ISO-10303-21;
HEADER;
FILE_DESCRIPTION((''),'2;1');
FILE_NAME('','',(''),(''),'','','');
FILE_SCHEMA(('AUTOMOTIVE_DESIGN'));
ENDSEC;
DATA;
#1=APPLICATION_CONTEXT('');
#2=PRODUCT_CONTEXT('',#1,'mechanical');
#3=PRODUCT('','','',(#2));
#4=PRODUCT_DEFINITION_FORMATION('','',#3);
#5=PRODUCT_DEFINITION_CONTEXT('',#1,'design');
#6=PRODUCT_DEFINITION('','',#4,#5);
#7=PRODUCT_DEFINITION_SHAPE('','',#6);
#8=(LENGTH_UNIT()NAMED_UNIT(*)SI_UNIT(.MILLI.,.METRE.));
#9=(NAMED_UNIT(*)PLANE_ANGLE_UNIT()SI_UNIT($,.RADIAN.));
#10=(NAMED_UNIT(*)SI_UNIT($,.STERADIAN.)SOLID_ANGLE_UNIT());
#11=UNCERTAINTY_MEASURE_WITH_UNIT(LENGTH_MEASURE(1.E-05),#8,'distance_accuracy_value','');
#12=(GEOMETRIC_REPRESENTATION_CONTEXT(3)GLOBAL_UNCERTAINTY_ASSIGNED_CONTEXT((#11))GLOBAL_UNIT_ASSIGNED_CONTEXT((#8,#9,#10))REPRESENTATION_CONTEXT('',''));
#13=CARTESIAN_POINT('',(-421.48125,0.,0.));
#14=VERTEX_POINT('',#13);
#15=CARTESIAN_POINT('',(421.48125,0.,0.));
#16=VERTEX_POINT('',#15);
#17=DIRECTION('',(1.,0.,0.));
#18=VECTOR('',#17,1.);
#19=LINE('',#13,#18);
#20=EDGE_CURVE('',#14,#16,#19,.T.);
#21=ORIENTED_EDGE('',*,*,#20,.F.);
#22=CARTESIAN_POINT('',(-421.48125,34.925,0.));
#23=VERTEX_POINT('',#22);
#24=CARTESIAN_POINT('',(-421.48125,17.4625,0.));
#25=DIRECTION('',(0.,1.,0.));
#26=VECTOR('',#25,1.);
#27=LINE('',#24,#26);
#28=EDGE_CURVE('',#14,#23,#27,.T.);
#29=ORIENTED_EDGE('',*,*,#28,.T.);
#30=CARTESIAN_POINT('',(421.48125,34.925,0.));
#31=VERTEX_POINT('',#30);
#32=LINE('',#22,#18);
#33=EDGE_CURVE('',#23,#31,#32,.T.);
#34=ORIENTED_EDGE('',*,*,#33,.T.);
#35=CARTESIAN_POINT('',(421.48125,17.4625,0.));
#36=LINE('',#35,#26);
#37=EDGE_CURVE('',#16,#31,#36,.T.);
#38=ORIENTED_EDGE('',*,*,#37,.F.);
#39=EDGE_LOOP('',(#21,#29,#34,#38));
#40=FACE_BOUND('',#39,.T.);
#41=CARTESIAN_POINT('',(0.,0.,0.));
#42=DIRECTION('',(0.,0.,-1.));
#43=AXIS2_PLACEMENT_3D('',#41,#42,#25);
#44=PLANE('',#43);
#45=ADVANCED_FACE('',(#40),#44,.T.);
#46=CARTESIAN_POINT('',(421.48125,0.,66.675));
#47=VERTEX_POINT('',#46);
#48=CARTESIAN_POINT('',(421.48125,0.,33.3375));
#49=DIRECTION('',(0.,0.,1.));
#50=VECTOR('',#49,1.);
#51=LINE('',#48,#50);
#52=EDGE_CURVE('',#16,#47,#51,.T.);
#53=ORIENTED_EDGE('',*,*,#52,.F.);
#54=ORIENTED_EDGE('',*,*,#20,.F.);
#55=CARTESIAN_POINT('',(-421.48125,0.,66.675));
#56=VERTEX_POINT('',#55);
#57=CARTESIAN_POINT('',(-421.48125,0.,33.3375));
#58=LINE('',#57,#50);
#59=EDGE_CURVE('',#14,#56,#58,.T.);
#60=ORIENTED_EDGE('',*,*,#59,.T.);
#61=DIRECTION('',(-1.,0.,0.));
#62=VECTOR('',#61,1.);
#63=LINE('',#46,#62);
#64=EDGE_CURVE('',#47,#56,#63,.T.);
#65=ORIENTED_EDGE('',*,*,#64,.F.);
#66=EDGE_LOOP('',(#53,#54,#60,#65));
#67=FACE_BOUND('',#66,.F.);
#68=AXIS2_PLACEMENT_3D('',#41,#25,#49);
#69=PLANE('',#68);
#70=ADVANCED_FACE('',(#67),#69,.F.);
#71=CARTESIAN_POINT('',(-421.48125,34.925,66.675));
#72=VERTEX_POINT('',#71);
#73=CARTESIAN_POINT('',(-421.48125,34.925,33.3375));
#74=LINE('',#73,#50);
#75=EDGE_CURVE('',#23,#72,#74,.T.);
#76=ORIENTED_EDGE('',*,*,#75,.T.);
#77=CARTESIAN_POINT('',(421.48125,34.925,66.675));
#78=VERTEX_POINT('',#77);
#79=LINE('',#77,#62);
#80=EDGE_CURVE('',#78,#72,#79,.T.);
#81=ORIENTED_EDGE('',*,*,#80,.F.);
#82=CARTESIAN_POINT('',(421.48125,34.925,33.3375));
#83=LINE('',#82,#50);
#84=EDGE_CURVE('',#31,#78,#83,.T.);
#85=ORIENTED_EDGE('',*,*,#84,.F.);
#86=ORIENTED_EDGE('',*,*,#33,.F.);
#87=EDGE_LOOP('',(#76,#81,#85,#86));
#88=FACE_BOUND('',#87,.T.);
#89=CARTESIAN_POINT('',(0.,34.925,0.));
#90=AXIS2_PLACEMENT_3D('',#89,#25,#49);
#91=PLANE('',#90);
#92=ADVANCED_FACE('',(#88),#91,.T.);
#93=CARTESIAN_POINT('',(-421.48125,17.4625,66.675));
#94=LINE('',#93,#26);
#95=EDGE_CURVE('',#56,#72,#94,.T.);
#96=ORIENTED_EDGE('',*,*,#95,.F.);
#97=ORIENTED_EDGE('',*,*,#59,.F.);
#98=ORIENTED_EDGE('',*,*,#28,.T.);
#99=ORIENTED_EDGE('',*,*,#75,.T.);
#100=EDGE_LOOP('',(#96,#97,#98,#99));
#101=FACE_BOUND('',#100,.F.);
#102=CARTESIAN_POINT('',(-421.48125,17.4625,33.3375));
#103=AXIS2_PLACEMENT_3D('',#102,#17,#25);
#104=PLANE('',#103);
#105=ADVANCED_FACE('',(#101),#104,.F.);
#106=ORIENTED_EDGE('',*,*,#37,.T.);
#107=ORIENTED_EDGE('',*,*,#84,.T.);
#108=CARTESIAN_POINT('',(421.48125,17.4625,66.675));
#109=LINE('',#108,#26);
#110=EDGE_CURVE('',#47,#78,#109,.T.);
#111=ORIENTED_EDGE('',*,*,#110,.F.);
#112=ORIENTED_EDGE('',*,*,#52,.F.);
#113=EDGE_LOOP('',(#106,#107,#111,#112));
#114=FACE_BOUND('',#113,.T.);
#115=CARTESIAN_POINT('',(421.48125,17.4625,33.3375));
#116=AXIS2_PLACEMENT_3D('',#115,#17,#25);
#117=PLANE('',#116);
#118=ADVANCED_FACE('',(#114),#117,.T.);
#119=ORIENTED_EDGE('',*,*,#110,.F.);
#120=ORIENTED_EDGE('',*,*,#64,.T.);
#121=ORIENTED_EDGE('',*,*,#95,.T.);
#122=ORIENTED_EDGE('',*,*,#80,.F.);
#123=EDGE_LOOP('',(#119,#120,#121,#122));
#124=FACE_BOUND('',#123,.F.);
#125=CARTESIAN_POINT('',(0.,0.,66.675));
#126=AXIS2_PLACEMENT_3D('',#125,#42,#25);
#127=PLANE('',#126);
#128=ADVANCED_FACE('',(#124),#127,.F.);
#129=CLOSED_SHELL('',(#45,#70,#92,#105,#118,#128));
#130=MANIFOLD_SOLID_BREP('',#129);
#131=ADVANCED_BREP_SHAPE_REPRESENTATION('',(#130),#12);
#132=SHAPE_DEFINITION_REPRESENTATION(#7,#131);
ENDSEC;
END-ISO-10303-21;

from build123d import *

# Parameters (mm, degrees)
F0_W     = 34.925
F0_H     = 66.675
F1_DEPTH = 421.48125


# Not quite as in the source:
# - a length typed as a fraction of an inch, garbled in the dataset ("3 / 203.2 mm" for 3/8 in), is restored


with BuildPart() as f1:
    # F0 (on Right) → F1 (new body, symmetric)
    with BuildSketch(Plane.YZ):
        with Locations((17.4625, 33.3375)):
            Rectangle(F0_W, F0_H)
    extrude(amount=F1_DEPTH, both=True)


solid = f1.part
